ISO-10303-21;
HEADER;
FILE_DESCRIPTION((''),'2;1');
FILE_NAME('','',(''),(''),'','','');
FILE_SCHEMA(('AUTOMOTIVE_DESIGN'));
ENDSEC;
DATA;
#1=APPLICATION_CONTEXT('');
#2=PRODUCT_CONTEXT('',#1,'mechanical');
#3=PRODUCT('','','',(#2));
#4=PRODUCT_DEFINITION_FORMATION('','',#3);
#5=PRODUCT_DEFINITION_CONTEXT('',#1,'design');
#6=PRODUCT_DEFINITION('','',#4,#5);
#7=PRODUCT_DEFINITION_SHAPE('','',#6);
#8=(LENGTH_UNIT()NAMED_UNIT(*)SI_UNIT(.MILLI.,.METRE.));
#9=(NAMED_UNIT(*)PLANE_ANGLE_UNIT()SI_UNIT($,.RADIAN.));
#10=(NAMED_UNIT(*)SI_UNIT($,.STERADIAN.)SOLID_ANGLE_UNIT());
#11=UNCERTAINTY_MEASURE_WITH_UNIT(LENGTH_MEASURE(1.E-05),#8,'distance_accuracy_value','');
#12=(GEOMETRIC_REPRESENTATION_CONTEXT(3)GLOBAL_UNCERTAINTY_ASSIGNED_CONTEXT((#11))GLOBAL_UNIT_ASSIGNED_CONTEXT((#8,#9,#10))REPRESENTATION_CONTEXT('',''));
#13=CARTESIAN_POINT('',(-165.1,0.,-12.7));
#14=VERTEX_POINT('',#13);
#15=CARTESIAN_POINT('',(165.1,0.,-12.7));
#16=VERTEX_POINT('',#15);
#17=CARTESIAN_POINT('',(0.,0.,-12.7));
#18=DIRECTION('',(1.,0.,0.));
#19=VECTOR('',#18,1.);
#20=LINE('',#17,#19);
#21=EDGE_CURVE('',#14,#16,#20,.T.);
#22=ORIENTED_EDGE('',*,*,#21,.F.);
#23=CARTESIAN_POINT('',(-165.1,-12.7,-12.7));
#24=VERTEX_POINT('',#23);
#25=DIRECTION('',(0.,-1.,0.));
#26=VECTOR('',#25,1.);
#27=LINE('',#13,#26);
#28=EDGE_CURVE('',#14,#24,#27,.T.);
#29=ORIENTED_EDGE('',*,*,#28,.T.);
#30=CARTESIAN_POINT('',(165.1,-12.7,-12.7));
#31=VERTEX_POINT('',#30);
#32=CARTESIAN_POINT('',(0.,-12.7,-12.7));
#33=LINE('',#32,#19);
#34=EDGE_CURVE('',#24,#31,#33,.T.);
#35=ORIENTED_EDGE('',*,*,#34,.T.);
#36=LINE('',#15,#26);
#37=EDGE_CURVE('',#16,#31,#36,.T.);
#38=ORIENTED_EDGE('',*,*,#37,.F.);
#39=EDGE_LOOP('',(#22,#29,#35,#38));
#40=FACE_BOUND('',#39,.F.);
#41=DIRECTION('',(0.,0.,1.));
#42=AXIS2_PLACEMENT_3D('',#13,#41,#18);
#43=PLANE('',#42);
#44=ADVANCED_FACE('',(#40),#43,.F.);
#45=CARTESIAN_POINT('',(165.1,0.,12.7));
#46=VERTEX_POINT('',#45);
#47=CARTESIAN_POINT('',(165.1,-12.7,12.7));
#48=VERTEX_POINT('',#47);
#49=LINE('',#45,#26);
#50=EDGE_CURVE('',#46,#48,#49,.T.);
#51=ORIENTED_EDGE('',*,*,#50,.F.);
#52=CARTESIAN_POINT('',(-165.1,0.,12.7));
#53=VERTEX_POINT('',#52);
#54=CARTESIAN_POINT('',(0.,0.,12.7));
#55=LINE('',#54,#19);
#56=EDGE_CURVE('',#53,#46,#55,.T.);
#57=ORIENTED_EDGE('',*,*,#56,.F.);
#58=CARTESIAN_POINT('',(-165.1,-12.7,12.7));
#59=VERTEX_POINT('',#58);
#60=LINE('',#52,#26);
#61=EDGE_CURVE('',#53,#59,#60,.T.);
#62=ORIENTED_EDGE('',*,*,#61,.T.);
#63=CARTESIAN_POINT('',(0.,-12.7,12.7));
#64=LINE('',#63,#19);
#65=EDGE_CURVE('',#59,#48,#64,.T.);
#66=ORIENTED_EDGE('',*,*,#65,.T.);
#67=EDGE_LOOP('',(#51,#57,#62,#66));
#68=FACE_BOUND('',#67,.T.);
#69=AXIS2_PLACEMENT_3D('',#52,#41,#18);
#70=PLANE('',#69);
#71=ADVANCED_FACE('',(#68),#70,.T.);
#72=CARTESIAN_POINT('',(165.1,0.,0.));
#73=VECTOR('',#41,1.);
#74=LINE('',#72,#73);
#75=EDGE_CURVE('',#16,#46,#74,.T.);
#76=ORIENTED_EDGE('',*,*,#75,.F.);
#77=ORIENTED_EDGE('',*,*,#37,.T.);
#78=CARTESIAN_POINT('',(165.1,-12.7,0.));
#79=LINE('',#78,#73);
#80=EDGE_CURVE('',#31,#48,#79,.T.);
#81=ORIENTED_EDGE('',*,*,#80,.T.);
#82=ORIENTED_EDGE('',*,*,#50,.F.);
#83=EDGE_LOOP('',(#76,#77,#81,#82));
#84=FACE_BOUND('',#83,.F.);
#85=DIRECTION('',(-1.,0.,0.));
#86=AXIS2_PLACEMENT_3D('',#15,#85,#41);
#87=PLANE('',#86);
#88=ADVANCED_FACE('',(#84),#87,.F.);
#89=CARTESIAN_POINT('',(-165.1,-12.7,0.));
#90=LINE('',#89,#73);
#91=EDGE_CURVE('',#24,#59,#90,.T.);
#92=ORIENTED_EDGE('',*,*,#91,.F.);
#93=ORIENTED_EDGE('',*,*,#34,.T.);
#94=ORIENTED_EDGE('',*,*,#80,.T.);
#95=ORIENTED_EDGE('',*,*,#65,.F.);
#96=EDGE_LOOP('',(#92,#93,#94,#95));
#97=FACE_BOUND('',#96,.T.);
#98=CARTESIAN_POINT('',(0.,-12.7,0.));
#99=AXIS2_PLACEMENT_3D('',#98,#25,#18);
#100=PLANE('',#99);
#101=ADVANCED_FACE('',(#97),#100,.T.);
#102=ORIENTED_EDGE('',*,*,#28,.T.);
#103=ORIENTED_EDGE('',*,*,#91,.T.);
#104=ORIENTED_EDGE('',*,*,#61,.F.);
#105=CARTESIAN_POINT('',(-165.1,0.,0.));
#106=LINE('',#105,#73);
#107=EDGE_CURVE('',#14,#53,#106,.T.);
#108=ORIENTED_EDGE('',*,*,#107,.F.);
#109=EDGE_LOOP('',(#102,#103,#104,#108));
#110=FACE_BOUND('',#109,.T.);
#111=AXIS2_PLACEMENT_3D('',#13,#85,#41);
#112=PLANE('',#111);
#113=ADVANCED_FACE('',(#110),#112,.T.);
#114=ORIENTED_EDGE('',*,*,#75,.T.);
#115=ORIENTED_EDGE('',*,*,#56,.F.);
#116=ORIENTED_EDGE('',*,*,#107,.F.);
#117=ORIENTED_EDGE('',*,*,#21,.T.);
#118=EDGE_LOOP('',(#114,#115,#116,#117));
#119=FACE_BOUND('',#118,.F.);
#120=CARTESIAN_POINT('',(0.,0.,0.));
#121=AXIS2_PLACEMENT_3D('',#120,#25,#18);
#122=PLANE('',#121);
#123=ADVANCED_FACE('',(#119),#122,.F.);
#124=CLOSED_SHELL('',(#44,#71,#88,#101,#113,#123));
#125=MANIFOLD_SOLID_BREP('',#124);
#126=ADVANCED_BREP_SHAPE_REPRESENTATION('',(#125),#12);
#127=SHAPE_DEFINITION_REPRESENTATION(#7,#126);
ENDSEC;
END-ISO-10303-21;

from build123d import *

# Parameters (mm, degrees)
F0_W     = 330.2
F0_H     = 25.4
F1_DEPTH = 12.7


# Not quite as in the source:
# - a feature names something its author has since deleted; it is built from what else it names


with BuildPart() as f1:
    # F0 (on Front) → F1 (new body)
    with BuildSketch(Plane.XZ):
        Rectangle(F0_W, F0_H)
    extrude(amount=F1_DEPTH)


solid = f1.part
